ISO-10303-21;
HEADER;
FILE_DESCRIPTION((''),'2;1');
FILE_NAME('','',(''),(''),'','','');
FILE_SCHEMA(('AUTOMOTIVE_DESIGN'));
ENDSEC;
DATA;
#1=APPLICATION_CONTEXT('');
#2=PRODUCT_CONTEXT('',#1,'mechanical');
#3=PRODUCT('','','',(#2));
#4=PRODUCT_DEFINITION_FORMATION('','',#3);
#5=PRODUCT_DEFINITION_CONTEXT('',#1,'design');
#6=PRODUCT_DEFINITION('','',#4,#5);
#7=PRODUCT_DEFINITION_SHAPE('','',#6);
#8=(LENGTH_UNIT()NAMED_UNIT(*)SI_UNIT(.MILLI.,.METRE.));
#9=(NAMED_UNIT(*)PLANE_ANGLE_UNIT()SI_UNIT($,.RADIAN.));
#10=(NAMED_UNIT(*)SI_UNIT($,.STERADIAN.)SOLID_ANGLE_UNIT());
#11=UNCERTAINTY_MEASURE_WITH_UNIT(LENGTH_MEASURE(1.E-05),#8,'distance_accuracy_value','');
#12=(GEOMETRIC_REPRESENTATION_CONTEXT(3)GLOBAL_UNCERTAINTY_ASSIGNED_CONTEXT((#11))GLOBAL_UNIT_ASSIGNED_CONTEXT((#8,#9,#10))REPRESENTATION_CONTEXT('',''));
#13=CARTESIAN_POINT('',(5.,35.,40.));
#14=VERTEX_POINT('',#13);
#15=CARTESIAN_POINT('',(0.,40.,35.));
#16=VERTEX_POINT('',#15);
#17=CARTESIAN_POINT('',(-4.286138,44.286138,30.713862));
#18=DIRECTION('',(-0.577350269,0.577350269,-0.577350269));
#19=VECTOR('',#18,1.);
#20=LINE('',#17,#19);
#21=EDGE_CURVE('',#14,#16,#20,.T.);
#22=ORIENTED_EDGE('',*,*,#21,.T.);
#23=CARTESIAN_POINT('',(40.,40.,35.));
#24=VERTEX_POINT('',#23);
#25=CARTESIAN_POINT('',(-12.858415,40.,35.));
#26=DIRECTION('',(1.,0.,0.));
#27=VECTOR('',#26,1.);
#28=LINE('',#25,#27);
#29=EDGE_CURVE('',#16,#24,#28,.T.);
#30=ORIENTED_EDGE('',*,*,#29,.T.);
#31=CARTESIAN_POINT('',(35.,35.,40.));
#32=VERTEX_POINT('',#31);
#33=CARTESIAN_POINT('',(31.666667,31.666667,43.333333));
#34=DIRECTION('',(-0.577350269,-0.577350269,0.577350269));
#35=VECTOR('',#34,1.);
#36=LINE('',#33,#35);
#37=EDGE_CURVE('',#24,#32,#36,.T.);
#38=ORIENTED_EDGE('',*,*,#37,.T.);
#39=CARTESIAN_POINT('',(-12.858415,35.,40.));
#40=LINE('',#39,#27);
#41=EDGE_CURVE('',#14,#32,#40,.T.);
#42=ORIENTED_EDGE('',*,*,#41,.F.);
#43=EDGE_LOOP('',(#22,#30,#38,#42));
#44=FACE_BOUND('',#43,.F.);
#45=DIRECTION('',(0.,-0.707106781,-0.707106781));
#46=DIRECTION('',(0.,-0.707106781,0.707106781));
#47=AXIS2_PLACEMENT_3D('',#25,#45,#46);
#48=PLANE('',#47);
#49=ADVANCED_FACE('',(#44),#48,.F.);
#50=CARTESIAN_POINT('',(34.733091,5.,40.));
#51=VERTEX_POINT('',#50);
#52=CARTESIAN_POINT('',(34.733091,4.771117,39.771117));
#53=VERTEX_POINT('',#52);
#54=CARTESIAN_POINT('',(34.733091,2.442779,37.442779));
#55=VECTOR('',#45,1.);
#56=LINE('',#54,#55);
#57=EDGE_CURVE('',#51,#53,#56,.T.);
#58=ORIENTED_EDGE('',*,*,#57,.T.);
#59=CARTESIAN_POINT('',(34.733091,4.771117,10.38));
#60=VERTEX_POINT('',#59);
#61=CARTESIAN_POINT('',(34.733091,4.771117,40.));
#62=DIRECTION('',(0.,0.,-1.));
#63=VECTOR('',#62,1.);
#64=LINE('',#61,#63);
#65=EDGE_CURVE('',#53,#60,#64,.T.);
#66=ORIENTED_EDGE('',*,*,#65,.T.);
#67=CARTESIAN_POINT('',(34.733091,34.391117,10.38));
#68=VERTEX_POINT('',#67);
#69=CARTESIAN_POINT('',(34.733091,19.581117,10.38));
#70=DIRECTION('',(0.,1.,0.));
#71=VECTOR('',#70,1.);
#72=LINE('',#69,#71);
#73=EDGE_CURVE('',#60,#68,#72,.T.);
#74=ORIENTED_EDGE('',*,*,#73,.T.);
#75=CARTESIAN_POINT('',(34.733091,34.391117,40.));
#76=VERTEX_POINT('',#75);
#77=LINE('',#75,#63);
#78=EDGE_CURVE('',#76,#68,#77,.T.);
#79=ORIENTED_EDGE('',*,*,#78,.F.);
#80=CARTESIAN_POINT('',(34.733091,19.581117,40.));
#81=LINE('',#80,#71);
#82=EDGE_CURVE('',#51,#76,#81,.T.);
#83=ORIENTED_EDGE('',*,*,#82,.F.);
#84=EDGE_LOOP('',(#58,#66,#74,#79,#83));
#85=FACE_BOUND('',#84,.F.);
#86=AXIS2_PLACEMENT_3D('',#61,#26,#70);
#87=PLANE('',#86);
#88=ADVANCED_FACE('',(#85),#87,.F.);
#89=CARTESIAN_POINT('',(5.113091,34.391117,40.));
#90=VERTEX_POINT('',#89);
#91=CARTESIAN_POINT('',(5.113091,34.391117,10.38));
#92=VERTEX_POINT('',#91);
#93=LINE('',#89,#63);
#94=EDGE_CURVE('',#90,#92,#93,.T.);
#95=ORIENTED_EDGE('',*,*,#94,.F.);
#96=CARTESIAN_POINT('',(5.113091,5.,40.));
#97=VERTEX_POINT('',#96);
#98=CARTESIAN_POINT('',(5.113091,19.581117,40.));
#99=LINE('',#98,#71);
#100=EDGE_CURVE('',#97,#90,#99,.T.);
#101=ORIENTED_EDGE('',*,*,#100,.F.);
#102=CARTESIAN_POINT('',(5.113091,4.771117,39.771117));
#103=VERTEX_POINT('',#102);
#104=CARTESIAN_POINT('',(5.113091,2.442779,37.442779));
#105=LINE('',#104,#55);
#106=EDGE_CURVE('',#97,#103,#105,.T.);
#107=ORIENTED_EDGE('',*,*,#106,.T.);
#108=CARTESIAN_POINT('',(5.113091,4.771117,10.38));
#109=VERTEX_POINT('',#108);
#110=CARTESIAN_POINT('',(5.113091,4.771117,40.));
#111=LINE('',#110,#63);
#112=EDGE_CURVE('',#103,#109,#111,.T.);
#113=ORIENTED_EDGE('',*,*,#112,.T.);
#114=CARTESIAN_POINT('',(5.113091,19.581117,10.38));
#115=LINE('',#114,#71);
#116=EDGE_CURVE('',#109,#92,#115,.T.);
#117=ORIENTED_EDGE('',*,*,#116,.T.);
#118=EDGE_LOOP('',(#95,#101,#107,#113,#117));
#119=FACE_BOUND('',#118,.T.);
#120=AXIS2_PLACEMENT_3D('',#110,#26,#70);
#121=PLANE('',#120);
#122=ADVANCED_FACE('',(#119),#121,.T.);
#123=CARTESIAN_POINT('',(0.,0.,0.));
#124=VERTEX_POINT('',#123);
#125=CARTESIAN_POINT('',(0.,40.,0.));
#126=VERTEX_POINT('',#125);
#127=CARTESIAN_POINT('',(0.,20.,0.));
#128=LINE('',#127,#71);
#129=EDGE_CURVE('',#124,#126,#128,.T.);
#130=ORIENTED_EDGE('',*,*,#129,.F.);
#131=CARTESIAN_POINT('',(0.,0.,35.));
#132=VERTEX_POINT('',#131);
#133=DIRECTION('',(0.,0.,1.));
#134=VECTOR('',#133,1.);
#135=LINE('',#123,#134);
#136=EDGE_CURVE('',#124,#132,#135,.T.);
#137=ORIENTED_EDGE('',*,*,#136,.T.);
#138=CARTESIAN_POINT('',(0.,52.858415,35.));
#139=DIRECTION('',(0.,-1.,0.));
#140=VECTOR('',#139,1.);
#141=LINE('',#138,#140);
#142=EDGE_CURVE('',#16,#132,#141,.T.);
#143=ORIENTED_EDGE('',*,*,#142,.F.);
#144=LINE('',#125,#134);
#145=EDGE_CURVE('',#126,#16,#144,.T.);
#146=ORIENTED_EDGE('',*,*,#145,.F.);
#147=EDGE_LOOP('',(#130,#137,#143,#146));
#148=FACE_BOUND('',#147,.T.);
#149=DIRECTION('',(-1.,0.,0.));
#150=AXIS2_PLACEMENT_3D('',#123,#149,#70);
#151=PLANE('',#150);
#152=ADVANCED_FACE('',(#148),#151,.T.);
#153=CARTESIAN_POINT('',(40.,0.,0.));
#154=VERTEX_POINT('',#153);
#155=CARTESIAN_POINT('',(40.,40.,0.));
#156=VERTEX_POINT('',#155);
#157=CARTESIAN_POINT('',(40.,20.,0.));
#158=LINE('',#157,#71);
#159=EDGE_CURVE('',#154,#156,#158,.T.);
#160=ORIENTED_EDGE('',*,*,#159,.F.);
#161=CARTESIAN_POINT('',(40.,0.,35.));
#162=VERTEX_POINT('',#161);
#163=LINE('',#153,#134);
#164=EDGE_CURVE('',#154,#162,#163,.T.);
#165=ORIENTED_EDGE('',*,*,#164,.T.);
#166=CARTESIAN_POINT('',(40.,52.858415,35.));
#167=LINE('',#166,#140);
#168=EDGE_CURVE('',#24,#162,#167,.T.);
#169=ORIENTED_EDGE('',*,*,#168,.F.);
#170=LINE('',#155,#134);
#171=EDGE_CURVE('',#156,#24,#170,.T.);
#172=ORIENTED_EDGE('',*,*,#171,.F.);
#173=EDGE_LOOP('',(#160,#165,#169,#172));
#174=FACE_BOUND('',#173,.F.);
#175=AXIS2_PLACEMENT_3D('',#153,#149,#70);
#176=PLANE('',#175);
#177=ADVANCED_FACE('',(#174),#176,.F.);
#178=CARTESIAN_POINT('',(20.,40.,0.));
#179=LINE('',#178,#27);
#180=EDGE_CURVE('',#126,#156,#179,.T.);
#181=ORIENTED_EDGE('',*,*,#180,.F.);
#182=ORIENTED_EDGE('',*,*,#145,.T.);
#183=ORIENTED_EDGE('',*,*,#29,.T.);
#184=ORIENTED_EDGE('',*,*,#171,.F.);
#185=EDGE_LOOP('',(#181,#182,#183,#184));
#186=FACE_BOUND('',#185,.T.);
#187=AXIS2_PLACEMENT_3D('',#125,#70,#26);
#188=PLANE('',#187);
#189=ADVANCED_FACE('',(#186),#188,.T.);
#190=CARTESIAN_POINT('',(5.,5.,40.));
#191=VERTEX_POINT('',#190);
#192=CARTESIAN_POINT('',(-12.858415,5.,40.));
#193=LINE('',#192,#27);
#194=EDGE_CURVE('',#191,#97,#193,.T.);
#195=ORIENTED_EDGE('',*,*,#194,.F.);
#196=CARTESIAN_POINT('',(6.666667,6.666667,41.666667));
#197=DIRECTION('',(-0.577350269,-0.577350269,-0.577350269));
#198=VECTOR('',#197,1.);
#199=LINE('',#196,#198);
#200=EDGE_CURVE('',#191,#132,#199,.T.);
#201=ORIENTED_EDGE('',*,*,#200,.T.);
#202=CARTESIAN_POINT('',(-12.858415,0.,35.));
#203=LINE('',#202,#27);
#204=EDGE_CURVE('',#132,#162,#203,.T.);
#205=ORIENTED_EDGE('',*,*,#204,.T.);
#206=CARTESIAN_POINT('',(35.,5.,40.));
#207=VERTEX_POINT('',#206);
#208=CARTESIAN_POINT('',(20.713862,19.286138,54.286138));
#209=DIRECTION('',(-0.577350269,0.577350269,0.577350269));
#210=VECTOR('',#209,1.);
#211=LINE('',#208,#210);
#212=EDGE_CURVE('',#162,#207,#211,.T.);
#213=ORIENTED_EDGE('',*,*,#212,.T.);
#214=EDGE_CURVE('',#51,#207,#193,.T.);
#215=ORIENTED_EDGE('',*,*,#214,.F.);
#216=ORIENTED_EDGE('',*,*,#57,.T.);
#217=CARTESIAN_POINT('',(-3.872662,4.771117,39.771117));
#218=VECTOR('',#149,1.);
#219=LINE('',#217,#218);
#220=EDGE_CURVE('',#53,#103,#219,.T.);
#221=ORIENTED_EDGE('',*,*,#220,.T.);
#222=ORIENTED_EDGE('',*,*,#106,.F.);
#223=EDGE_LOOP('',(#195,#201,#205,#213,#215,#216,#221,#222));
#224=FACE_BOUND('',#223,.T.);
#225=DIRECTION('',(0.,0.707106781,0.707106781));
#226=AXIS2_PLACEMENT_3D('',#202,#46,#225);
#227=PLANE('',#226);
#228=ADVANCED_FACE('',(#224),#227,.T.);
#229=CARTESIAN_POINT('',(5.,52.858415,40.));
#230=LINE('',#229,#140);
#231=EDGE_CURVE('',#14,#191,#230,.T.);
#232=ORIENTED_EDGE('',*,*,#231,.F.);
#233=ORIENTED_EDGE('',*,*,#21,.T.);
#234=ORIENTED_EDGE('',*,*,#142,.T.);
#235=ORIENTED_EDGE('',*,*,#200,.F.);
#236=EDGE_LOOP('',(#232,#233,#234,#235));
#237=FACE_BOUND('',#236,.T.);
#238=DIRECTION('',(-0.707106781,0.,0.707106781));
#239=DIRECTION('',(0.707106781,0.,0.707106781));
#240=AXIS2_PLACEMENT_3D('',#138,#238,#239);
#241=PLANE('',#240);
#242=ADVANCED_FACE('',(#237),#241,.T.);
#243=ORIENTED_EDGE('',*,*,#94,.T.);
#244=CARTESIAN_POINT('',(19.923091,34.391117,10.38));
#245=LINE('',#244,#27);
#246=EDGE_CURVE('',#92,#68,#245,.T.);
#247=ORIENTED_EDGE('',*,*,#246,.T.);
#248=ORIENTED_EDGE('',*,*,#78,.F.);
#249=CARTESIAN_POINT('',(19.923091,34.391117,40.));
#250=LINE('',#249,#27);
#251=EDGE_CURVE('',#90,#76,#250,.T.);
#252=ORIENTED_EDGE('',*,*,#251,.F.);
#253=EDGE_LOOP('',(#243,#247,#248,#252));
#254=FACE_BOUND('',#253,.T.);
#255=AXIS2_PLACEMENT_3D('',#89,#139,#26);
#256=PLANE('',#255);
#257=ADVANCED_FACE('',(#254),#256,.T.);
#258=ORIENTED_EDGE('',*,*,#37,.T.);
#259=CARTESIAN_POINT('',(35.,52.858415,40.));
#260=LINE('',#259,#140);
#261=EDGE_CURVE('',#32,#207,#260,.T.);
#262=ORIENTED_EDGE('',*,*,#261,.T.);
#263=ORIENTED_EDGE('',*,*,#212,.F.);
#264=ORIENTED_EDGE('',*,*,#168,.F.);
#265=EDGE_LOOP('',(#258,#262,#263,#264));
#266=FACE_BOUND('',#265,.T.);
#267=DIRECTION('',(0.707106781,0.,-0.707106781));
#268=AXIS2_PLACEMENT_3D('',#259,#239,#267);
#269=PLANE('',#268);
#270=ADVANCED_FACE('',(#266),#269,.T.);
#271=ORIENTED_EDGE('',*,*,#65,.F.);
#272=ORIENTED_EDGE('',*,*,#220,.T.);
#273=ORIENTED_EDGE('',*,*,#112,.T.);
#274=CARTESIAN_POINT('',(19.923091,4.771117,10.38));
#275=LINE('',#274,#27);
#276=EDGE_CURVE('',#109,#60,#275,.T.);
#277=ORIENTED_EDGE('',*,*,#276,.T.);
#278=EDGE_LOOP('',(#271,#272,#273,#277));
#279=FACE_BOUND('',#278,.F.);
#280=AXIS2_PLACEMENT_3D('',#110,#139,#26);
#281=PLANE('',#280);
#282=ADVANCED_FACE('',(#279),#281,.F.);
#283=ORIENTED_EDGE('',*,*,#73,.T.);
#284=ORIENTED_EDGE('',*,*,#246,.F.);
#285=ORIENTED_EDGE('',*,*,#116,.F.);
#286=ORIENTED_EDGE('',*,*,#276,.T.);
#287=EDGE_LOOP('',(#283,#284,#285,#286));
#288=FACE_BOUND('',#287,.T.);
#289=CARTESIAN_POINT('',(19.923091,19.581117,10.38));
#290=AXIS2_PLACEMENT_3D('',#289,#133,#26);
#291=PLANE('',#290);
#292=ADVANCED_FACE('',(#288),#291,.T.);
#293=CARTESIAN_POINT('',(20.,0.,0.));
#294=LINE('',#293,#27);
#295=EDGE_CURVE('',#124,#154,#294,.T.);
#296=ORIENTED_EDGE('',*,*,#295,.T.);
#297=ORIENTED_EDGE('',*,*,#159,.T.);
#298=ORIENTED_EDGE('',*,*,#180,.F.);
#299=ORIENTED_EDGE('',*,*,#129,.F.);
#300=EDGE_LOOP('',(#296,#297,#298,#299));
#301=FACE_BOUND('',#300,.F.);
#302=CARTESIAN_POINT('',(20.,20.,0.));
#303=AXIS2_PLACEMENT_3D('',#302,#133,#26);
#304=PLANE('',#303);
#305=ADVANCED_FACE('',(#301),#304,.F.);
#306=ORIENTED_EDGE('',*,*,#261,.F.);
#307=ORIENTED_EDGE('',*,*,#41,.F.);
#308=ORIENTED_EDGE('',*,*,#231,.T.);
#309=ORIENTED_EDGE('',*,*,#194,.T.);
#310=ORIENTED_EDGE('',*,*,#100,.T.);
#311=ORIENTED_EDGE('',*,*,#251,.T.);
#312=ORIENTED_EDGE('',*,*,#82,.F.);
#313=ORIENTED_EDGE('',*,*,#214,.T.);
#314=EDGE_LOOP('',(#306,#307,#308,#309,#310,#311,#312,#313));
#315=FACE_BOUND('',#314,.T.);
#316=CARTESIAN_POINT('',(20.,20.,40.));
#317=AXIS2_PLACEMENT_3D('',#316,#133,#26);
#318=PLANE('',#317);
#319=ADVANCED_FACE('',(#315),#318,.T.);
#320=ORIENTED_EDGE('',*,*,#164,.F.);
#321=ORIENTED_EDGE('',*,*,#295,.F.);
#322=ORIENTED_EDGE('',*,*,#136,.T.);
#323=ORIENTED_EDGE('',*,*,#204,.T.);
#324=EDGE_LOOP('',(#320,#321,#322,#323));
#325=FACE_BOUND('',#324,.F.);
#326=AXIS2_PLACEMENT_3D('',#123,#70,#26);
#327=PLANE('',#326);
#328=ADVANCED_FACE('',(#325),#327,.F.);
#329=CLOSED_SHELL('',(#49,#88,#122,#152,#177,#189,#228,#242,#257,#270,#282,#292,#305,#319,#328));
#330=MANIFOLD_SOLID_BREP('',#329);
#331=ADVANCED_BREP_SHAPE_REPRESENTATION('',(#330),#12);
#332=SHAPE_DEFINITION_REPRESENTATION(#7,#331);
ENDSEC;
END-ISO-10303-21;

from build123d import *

# Parameters (mm, degrees)
F0_W        = 40
F0_H        = 40
F1_DEPTH    = 40
F2_W        = 29.62
F2_H        = 29.62
F3_DEPTH    = 29.62
F4_T1_DEPTH = 65.7168298797
F4_T3_DEPTH = 65.7168298797


# Not quite as in the source:
# - a fillet or chamfer that OpenCascade refuses, or shapes differently, is made with other operations: its cross-section is extruded or revolved along the edge and cut away or added


with BuildPart() as f1:
    # F0 (on Top) → F1 (new body)
    with BuildSketch(Plane.XY):
        with Locations((20, 20)):
            Rectangle(F0_W, F0_H)
    extrude(amount=F1_DEPTH)

    # F2 (on face) → F3 (cut)
    with BuildSketch(Plane.XY.offset(40)):
        with Locations((19.9230909348, 19.5811167631)):
            Rectangle(F2_W, F2_H)
    extrude(amount=-F3_DEPTH, mode=Mode.SUBTRACT)

    # F4: chamfer of 5 on 4 edges, made by hand

    # F4_s2 → F4_t1 (cut)
    with BuildSketch(Plane.YZ.offset(-12.8584149398)):
        Polygon((0, 35), (5, 40), (0, 40), align=None)
        Polygon((40, 35), (35, 40), (40, 40), align=None)
    extrude(amount=F4_T1_DEPTH, mode=Mode.SUBTRACT)

    # F4_s4 → F4_t3 (cut)
    with BuildSketch(Plane.XZ.offset(-52.8584149398)):
        Polygon((35, 40), (40, 35), (40, 40), align=None)
        Polygon((0, 35), (5, 40), (0, 40), align=None)
    extrude(amount=F4_T3_DEPTH, mode=Mode.SUBTRACT)


solid = f1.part
